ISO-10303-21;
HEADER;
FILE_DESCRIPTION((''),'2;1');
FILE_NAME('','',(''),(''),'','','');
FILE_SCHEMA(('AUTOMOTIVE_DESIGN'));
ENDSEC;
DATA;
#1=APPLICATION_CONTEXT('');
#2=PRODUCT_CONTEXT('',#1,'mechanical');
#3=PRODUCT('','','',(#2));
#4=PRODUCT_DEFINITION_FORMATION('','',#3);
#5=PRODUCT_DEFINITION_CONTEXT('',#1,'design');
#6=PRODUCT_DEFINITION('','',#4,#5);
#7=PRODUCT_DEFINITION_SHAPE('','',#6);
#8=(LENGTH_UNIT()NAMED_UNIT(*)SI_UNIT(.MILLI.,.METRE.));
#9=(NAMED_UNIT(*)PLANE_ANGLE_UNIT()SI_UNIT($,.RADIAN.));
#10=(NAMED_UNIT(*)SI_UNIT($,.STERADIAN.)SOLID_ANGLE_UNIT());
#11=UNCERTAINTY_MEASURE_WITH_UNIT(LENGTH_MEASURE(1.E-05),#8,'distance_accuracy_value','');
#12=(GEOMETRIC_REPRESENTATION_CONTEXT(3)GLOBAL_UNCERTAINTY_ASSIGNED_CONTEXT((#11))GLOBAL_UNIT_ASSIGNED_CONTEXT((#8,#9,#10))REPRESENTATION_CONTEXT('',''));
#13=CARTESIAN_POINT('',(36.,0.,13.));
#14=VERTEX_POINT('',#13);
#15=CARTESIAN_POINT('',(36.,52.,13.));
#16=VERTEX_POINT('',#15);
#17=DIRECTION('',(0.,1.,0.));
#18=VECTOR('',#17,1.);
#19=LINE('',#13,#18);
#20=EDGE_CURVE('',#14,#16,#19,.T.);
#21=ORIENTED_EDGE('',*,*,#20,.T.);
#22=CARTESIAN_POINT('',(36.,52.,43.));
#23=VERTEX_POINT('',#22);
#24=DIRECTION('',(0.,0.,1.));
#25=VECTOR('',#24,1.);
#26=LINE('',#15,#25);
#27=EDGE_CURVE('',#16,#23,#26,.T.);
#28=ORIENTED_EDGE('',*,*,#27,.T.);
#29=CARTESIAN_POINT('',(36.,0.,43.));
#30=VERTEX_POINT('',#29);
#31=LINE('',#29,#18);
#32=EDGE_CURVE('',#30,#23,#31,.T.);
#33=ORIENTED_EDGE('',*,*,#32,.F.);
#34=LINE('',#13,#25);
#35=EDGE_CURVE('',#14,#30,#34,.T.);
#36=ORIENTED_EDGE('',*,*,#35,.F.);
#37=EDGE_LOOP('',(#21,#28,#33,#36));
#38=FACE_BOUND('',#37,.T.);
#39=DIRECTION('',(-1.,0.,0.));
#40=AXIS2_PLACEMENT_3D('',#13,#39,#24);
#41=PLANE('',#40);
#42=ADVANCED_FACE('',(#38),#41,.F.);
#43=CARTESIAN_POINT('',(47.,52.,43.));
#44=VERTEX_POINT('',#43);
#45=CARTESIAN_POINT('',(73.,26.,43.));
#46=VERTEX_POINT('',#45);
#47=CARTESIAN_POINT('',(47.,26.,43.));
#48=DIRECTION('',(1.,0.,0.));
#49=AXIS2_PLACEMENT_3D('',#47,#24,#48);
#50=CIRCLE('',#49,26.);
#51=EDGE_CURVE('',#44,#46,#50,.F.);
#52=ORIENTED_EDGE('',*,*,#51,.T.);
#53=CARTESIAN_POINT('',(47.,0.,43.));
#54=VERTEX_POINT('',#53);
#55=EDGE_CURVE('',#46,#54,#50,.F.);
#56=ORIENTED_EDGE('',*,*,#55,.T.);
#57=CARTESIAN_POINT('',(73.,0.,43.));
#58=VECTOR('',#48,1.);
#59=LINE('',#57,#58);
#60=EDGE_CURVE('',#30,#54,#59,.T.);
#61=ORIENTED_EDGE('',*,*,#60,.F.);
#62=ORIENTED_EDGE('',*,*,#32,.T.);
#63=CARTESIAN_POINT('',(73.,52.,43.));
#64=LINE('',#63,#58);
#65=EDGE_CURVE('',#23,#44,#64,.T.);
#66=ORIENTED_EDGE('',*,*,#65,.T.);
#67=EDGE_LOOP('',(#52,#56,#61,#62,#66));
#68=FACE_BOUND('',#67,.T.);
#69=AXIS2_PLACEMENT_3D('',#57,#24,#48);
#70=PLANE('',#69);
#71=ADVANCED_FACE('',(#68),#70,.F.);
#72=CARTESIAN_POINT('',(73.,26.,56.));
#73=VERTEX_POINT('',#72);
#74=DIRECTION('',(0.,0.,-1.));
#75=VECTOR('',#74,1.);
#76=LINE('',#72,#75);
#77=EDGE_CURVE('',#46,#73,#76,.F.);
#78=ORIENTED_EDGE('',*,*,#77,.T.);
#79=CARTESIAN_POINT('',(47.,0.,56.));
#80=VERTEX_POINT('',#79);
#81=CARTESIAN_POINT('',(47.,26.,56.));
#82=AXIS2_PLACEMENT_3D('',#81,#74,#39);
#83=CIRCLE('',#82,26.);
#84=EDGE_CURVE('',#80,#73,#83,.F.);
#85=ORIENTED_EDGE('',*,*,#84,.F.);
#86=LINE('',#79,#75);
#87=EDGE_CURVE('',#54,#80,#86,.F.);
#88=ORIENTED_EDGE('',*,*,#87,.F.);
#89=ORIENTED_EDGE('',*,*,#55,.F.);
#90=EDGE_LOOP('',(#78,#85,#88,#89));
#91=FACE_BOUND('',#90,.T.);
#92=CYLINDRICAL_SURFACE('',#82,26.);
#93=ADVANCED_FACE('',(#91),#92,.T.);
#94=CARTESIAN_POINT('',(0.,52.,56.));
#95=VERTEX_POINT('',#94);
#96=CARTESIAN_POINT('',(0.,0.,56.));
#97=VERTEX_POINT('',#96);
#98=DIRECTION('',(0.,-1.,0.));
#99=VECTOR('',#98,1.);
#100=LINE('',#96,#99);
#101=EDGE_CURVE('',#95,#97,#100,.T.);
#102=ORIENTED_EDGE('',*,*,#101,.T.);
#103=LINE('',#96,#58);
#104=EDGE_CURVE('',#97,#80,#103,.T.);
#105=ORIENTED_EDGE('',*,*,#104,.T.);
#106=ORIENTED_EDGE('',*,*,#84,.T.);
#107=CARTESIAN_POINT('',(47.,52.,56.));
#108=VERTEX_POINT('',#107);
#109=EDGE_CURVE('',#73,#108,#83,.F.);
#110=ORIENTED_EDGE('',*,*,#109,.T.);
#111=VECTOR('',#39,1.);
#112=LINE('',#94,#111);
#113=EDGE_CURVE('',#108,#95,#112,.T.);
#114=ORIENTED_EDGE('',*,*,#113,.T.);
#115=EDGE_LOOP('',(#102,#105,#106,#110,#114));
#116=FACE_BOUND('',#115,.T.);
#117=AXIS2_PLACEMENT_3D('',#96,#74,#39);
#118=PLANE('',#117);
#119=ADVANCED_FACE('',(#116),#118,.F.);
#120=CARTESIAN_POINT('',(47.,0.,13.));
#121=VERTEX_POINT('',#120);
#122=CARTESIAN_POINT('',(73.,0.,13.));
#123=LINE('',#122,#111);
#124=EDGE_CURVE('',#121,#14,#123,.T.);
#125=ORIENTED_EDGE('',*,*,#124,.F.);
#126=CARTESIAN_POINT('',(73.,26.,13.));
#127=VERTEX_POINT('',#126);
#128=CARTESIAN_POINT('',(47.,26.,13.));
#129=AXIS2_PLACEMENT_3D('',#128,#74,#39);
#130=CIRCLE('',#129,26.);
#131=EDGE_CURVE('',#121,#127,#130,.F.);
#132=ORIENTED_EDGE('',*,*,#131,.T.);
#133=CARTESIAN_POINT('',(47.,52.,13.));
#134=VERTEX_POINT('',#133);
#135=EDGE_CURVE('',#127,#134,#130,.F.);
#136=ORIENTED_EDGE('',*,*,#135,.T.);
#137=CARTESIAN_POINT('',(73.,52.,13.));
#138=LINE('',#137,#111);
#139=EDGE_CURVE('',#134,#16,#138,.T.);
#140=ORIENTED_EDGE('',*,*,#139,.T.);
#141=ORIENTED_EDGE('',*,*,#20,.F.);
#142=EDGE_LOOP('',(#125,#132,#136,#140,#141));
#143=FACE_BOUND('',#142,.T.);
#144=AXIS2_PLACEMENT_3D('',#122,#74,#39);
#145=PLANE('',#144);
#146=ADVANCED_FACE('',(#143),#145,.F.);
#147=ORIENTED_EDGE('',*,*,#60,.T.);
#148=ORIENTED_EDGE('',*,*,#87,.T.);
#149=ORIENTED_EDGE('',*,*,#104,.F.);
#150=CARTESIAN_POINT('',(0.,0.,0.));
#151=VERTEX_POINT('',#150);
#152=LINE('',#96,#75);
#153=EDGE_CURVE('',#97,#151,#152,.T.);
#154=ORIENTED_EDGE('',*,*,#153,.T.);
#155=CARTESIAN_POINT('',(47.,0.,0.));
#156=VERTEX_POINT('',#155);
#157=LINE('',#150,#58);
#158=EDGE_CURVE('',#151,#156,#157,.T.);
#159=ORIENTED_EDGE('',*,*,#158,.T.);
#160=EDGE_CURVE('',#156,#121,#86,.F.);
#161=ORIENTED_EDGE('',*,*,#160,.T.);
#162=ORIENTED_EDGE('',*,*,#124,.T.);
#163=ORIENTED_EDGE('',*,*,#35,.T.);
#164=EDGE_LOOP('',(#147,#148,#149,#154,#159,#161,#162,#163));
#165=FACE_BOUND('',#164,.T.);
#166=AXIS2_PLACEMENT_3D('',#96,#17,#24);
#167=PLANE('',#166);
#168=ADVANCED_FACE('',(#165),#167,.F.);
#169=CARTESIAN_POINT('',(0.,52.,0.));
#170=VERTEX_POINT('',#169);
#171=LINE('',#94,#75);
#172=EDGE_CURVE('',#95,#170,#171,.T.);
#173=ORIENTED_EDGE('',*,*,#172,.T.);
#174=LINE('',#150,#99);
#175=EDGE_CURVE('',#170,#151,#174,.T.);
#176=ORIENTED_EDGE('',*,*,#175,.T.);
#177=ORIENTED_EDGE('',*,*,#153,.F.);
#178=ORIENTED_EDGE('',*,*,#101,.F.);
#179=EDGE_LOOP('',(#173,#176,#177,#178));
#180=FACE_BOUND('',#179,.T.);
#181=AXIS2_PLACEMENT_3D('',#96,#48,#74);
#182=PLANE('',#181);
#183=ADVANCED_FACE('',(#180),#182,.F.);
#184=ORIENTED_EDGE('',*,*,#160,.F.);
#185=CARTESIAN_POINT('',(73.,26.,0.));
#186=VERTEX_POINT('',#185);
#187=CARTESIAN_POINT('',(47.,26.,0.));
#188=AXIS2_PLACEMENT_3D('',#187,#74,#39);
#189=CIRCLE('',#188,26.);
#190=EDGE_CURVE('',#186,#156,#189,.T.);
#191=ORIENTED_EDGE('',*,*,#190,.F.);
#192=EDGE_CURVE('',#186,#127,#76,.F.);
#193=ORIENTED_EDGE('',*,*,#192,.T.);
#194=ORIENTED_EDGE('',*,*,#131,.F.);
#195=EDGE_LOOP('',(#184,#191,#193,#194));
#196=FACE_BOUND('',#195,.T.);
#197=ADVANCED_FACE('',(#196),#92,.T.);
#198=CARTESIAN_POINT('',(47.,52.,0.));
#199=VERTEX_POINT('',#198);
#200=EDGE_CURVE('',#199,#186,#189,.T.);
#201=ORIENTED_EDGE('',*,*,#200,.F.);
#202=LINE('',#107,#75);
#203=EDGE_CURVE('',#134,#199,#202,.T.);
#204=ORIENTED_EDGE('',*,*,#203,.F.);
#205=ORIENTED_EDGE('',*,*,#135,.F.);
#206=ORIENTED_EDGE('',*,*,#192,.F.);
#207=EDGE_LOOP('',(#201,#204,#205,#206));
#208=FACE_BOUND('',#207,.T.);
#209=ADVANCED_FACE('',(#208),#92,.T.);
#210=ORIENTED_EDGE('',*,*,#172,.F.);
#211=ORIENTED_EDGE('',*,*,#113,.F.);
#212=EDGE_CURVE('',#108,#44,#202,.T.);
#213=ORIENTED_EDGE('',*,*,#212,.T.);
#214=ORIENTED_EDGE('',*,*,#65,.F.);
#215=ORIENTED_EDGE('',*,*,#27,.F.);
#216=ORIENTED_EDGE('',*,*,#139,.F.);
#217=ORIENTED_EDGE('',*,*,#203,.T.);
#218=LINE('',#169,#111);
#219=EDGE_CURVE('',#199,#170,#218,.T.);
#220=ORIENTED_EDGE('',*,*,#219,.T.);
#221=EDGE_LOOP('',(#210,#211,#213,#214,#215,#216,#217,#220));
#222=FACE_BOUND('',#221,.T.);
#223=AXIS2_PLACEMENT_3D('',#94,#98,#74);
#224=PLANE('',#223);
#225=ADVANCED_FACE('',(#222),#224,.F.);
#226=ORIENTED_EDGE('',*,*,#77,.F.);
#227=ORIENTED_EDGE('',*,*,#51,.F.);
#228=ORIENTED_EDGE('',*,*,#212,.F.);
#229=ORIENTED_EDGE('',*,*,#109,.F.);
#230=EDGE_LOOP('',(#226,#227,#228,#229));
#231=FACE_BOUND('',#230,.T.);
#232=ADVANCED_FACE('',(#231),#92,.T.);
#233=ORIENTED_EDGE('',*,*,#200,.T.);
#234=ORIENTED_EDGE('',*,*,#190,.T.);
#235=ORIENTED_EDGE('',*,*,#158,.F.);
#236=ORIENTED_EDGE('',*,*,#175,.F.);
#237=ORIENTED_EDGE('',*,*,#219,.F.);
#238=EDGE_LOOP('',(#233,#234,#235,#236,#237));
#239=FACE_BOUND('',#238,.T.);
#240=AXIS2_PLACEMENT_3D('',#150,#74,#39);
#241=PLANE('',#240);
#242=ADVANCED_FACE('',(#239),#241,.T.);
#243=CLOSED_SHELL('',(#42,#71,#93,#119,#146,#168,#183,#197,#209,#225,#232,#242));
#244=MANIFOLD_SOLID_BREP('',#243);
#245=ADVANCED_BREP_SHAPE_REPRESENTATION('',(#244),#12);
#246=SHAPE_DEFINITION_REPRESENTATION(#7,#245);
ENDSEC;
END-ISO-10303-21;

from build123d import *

# Parameters (mm, degrees)
IZIM1_W                     = 73
IZIM1_H                     = 52
Y_KSEKLIK_EKSTR_ZYON1_DEPTH = 56
IZIM2_W                     = 37
IZIM2_H                     = 30
KES_EKSTR_ZYON1_DEPTH       = 106.683489723
RADYUS1_R                   = 26
RADYUS2_R                   = 26
RADYUS3_R                   = 26
RADYUS5_R                   = 26


with BuildPart() as part:
    # Çizim1 → Yükseklik-Ekstrüzyon1 (new body)
    with BuildSketch(Plane.XY):
        with Locations((36.5, 26)):
            Rectangle(IZIM1_W, IZIM1_H)
    extrude(amount=Y_KSEKLIK_EKSTR_ZYON1_DEPTH)

    # Çizim2 → Kes-Ekstrüzyon1 (cut, through all)
    with BuildSketch(Plane(origin=(0, 52, 0), x_dir=(1, 0, 0), z_dir=(0, 1, 0))):
        with Locations((54.5, -28)):
            Rectangle(IZIM2_W, IZIM2_H)
    extrude(amount=-KES_EKSTR_ZYON1_DEPTH, mode=Mode.SUBTRACT)

    # Radyus1
    radyus1_edges = [part.edges().sort_by_distance(p)[0] for p in [
        (73, 52, 49.5),
    ]]
    fillet(radyus1_edges, radius=RADYUS1_R)

    # Radyus2
    radyus2_edges = [part.edges().sort_by_distance(p)[0] for p in [
        (73, 0, 49.5),
    ]]
    fillet(radyus2_edges, radius=RADYUS2_R - 0.0001)  # a hair under: the kernel refuses the full size

    # Radyus3
    radyus3_edges = [part.edges().sort_by_distance(p)[0] for p in [
        (73, 52, 6.5),
    ]]
    fillet(radyus3_edges, radius=RADYUS3_R)

    # Radyus5
    radyus5_edges = [part.edges().sort_by_distance(p)[0] for p in [
        (73, 0, 6.5),
    ]]
    fillet(radyus5_edges, radius=RADYUS5_R - 0.0001)  # a hair under: the kernel refuses the full size


solid = part.part
